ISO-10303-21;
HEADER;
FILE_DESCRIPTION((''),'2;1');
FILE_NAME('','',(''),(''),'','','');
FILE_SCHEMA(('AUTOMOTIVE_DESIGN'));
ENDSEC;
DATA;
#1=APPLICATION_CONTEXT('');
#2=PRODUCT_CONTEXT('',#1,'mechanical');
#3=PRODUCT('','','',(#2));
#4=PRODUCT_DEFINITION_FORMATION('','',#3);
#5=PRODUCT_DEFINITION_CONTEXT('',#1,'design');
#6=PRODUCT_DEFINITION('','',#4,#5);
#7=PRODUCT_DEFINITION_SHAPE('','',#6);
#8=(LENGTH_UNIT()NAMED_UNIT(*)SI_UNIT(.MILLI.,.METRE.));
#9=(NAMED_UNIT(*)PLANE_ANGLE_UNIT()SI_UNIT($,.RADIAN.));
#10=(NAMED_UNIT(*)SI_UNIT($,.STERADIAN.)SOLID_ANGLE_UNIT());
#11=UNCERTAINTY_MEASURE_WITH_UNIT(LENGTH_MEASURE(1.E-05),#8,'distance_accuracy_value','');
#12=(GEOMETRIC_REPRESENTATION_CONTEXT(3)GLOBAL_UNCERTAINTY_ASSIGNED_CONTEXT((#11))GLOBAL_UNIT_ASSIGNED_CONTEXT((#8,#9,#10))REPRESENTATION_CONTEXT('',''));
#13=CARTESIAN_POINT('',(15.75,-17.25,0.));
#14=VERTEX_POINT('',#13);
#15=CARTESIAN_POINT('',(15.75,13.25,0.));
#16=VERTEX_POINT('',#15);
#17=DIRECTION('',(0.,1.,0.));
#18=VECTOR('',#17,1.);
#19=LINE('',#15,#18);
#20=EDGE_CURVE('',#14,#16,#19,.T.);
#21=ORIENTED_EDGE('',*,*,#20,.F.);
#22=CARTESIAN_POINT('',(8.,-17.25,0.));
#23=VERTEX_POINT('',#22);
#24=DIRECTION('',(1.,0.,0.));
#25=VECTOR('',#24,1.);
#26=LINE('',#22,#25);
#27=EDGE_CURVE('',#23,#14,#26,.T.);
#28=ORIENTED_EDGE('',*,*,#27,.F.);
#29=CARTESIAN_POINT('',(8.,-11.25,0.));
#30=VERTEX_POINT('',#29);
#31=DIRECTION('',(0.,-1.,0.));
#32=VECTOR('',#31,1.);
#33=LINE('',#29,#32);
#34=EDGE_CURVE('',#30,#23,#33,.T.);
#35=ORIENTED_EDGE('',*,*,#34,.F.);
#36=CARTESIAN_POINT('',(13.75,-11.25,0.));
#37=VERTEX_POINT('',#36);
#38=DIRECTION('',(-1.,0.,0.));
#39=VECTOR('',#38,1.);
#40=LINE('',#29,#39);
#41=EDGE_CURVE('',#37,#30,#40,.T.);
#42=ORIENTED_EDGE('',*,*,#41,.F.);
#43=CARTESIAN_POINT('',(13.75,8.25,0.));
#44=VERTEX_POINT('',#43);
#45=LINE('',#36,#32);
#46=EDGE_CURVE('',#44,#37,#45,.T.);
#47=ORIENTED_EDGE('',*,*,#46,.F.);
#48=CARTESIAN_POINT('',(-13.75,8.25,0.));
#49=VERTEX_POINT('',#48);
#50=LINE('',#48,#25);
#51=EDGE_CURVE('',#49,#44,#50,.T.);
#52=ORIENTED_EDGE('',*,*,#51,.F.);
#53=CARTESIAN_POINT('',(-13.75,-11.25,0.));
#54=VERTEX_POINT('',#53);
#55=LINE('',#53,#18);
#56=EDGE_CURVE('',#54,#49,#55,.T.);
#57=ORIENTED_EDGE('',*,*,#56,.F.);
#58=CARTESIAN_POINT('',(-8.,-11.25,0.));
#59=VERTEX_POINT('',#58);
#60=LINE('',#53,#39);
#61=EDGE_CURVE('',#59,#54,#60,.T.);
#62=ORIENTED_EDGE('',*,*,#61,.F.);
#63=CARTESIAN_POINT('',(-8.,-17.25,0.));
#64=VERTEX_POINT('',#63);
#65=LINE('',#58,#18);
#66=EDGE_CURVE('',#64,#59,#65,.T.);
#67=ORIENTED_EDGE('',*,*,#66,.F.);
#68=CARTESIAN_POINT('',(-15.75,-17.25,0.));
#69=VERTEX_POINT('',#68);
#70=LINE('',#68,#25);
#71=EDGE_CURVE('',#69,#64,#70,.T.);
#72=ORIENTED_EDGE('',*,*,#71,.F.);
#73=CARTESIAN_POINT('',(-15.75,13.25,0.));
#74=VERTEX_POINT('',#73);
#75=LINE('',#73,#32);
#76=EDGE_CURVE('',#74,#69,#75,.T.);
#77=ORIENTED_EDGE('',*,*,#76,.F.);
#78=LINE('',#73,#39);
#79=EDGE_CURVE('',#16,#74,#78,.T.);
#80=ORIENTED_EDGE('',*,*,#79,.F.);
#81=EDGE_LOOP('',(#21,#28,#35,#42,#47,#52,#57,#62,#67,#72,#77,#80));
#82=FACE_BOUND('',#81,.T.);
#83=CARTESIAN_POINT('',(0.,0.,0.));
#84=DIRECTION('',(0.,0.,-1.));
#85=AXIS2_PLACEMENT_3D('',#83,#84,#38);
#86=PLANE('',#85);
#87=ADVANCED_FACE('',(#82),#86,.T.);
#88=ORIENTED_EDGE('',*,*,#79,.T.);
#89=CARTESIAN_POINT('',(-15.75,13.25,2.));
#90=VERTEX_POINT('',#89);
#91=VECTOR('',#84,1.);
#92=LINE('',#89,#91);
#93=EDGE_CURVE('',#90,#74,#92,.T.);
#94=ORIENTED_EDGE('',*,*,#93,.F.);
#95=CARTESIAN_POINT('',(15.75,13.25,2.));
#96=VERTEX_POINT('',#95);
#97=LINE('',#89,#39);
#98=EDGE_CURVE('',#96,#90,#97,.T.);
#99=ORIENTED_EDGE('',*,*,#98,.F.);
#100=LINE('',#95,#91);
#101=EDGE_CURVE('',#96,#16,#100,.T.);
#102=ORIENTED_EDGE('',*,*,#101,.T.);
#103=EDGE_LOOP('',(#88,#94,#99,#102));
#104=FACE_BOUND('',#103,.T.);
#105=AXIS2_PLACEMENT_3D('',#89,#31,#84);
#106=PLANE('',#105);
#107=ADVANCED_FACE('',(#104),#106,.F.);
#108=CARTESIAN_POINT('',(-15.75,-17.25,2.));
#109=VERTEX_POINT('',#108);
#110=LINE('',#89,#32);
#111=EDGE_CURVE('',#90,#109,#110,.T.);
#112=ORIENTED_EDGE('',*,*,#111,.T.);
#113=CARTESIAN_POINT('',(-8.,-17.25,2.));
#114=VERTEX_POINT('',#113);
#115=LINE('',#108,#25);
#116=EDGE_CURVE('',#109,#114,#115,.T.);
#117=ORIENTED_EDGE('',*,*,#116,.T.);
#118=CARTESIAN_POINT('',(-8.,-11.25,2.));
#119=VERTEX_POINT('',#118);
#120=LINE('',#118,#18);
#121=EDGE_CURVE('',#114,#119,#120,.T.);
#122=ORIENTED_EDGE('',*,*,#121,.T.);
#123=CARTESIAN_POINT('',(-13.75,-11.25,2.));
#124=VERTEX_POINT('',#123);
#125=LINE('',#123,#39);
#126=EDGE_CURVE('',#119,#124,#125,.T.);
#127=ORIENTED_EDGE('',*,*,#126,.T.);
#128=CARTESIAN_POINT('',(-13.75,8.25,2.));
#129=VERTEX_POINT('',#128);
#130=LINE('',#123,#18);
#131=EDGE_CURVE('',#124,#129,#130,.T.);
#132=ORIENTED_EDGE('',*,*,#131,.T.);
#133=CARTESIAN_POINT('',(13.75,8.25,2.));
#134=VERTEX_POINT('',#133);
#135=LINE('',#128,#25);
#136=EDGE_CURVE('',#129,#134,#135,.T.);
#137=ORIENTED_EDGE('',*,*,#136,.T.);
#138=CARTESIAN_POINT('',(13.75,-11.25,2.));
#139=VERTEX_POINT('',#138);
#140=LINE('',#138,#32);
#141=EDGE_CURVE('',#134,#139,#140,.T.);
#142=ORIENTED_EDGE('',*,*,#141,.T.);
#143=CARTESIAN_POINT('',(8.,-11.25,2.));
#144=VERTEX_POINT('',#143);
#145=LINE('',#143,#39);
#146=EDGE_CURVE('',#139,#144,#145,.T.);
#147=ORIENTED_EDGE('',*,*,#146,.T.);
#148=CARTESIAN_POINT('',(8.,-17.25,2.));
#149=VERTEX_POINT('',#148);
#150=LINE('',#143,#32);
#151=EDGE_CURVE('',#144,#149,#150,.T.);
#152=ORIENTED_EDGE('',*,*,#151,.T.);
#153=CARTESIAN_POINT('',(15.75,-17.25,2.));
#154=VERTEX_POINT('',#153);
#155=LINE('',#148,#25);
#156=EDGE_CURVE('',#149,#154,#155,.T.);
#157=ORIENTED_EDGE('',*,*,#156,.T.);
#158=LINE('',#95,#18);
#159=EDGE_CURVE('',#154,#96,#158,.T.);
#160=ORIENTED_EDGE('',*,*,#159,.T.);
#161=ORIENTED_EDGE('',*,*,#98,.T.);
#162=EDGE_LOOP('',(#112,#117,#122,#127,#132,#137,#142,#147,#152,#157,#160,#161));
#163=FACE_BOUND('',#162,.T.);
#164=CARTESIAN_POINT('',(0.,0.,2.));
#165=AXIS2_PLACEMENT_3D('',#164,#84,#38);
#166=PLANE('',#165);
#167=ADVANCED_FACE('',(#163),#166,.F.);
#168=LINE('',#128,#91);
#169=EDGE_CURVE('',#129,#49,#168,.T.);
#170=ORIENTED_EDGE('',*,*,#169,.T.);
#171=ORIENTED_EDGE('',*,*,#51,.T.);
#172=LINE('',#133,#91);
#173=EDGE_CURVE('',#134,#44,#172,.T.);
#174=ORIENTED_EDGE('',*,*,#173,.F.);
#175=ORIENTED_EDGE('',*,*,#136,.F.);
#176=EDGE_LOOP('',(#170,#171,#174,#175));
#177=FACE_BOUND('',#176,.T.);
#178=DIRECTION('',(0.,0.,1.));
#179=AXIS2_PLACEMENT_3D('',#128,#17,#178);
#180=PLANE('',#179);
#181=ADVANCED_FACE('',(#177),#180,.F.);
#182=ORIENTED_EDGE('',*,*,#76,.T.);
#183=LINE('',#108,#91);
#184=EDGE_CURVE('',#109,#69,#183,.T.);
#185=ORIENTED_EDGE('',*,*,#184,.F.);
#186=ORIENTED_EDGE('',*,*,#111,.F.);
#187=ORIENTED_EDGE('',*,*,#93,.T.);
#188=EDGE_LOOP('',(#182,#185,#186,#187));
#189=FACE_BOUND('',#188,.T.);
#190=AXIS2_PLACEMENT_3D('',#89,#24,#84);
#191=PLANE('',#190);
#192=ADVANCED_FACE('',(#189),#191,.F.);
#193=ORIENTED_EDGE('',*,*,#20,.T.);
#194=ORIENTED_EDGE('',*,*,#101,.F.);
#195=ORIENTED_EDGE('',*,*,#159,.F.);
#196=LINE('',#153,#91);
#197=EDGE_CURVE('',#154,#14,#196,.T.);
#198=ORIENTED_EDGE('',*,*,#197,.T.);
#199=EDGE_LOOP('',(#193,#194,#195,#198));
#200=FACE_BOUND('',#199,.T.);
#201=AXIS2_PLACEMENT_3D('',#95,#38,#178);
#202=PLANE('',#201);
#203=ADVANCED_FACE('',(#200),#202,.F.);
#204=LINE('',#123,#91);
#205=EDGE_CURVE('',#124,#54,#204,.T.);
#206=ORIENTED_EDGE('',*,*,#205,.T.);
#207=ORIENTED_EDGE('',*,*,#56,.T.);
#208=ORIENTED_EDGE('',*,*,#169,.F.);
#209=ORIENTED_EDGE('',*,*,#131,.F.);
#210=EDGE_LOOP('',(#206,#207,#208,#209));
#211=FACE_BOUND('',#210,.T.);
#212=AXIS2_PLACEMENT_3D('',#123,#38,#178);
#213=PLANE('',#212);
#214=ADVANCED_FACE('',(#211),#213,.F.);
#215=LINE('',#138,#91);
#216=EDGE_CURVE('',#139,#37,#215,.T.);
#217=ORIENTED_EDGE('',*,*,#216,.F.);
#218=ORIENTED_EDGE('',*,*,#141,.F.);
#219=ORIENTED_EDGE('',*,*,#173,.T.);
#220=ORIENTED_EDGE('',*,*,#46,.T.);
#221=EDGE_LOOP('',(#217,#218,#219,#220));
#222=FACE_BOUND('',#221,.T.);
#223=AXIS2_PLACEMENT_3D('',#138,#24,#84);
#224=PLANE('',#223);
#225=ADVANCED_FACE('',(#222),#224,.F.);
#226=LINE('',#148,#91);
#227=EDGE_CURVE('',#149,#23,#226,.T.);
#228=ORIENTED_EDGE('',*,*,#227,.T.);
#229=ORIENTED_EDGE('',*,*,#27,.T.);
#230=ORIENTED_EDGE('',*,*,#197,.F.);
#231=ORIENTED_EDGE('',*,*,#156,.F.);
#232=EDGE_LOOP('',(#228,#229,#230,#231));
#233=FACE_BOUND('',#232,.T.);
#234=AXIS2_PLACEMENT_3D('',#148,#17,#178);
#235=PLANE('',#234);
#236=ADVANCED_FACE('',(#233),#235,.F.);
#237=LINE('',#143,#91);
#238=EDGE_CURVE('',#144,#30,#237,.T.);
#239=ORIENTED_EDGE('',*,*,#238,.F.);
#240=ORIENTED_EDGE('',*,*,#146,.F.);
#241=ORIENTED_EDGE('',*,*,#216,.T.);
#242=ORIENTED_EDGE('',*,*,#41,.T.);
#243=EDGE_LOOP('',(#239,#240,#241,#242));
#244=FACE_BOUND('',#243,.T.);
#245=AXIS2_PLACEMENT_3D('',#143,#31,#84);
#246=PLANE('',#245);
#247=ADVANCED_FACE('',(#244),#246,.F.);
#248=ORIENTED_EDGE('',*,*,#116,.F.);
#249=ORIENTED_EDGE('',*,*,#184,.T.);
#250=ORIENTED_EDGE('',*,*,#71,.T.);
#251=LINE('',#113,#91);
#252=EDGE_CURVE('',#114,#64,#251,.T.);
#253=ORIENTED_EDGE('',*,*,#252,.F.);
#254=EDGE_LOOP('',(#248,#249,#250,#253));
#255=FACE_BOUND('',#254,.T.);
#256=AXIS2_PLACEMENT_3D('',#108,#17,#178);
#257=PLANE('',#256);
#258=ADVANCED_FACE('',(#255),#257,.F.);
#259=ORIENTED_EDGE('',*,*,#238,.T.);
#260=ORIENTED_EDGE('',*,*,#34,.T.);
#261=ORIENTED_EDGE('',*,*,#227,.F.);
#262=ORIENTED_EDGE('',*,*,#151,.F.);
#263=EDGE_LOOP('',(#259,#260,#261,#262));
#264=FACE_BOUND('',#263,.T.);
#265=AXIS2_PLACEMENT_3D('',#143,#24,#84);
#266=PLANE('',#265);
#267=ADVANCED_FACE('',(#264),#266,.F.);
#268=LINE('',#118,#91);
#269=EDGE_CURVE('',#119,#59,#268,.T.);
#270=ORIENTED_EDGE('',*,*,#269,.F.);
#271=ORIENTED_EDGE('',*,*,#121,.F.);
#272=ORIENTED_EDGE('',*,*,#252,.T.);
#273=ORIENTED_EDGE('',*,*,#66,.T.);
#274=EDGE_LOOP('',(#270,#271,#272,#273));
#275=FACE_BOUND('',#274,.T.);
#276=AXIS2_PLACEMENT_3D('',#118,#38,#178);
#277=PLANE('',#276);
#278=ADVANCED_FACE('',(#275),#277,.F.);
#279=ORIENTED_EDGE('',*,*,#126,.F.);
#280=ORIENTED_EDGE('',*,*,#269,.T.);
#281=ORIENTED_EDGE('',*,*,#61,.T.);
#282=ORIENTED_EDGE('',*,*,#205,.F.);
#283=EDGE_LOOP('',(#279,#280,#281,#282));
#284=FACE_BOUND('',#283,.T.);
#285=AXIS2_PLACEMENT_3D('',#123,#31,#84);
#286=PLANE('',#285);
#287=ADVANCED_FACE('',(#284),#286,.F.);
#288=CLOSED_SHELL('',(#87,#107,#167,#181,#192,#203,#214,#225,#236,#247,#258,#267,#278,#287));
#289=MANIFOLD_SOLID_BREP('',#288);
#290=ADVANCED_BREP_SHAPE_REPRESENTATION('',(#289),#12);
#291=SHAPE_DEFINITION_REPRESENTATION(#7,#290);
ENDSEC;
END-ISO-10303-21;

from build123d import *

# Parameters (mm, degrees)
SALIENTE_EXTRUIR1_DEPTH = 2


with BuildPart() as part:
    # Croquis4 → Saliente-Extruir1 (new body)
    with BuildSketch(Plane.XY):
        Polygon((-13.75, -11.25), (-8, -11.25), (-8, -17.25), (-15.75, -17.25), (-15.75, 13.25), (15.75, 13.25), (15.75, -17.25), (8, -17.25), (8, -11.25), (13.75, -11.25), (13.75, 8.25), (-13.75, 8.25), align=None)
    extrude(amount=SALIENTE_EXTRUIR1_DEPTH)


solid = part.part
